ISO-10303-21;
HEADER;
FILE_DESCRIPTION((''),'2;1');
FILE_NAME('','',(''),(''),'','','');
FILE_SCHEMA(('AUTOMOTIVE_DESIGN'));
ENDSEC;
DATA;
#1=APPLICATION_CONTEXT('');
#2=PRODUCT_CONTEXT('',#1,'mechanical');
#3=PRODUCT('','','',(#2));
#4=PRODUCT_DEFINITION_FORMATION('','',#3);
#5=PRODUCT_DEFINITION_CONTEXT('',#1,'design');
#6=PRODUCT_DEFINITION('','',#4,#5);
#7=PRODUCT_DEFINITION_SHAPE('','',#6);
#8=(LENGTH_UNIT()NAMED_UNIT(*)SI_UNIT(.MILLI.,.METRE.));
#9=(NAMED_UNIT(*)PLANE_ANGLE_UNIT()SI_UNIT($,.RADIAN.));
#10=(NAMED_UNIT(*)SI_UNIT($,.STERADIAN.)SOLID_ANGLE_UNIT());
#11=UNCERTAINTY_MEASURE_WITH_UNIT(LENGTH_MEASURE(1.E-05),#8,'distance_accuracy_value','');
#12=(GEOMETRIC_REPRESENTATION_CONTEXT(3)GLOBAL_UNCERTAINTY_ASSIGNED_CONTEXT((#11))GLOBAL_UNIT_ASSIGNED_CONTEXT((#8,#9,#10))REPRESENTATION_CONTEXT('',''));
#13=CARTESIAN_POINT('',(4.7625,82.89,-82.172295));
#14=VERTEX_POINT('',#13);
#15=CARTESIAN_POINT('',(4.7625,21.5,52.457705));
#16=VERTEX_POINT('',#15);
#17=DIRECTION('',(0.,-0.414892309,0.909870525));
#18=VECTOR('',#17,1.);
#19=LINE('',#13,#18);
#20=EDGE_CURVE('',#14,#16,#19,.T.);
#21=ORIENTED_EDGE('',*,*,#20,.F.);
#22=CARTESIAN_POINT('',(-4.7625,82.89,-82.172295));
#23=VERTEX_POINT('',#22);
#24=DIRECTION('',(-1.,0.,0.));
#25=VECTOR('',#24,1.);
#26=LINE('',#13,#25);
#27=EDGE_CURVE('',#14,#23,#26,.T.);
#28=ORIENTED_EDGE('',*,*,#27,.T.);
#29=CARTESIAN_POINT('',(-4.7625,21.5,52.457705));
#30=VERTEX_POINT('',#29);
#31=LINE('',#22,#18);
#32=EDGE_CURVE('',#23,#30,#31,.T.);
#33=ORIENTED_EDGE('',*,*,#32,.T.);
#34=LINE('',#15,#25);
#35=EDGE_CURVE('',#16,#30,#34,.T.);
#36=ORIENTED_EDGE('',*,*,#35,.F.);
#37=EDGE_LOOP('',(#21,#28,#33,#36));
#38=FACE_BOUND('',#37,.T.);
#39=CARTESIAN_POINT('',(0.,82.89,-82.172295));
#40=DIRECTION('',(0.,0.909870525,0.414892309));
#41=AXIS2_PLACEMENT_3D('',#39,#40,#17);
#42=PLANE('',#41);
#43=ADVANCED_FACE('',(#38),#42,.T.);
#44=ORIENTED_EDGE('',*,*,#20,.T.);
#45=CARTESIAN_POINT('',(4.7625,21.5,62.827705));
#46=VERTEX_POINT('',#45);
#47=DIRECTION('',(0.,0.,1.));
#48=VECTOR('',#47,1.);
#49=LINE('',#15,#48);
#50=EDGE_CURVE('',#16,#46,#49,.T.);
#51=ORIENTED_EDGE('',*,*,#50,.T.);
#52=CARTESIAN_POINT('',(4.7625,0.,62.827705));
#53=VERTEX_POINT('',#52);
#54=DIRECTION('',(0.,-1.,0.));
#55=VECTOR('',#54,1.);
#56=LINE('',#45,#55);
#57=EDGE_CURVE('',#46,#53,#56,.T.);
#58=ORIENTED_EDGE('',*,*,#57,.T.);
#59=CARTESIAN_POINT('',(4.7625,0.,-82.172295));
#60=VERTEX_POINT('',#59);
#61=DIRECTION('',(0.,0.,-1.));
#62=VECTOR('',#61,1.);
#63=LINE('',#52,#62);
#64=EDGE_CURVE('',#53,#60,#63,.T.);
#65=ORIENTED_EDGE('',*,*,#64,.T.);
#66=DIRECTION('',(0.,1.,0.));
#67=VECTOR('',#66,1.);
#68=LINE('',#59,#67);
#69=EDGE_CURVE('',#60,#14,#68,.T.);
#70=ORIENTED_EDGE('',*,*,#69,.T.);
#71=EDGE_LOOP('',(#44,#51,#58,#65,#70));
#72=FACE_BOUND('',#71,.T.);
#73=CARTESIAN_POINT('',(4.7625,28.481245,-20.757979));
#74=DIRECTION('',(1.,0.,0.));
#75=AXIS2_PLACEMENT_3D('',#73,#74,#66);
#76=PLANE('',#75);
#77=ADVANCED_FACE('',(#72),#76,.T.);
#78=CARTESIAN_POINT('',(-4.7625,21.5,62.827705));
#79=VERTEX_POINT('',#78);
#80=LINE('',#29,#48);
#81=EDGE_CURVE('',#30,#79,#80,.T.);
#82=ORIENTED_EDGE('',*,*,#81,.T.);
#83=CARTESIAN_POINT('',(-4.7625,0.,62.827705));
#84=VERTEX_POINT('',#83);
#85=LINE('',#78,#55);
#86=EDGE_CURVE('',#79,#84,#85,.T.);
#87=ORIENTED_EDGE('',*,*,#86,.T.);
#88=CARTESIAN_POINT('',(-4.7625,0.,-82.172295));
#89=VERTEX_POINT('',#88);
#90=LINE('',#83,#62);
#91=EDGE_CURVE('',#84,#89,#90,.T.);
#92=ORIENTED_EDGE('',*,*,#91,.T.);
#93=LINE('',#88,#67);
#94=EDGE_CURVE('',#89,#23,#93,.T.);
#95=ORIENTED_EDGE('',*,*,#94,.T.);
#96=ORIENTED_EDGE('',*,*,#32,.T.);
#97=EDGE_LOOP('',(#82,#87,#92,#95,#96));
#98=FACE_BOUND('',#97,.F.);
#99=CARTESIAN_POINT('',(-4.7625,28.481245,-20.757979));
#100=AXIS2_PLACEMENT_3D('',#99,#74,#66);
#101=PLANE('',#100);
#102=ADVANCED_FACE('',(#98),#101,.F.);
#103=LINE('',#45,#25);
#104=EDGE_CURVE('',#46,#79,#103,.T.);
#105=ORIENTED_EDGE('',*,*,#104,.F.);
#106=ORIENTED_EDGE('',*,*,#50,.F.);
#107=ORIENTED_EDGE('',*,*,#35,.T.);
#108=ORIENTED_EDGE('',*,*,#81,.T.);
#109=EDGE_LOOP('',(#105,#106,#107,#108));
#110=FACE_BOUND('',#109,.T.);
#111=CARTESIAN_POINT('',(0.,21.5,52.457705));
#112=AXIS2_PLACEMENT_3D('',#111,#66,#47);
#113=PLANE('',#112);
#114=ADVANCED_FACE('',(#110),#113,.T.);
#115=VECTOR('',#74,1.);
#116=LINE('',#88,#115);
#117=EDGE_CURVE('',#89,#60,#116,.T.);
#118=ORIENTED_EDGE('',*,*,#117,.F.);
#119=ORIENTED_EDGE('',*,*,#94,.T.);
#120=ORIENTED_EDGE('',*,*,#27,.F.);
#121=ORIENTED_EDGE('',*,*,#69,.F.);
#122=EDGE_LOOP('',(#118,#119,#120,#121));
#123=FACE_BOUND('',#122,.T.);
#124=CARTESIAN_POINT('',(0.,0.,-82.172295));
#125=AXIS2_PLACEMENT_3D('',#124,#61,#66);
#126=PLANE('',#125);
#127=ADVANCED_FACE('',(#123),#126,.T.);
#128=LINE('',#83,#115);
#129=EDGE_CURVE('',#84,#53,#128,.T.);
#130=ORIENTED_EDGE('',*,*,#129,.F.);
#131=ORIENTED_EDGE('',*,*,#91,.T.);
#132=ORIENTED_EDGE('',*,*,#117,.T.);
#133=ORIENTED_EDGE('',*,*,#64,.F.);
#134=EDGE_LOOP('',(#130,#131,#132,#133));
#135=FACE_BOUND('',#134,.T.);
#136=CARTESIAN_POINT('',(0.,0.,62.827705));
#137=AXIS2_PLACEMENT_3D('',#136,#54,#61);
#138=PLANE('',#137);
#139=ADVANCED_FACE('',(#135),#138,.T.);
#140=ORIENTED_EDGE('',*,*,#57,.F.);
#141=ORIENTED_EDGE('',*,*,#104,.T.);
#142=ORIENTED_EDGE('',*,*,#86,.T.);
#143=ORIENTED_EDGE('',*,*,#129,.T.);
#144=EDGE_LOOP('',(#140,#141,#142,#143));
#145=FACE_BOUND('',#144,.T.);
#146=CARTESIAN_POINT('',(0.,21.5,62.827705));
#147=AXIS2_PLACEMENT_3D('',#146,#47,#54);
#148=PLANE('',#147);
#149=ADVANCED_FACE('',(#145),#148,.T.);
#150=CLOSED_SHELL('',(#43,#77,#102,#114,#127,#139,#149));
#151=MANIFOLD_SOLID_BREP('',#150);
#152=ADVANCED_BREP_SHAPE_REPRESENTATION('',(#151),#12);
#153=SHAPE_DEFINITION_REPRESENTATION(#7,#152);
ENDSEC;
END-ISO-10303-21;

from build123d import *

# Parameters (mm, degrees)
F1_DEPTH = 4.7625


# Not quite as in the source:
# - a length typed as a fraction of an inch, garbled in the dataset ("3 / 203.2 mm" for 3/8 in), is restored


with BuildPart() as f1:
    # F0 (on Right) → F1 (new body, symmetric)
    with BuildSketch(Plane.YZ):
        Polygon((21.5, 62.8277051401), (0, 62.8277051401), (0, -82.1722948599), (82.89, -82.1722948599), (21.5, 52.4577051401), align=None)
    extrude(amount=F1_DEPTH, both=True)


solid = f1.part
